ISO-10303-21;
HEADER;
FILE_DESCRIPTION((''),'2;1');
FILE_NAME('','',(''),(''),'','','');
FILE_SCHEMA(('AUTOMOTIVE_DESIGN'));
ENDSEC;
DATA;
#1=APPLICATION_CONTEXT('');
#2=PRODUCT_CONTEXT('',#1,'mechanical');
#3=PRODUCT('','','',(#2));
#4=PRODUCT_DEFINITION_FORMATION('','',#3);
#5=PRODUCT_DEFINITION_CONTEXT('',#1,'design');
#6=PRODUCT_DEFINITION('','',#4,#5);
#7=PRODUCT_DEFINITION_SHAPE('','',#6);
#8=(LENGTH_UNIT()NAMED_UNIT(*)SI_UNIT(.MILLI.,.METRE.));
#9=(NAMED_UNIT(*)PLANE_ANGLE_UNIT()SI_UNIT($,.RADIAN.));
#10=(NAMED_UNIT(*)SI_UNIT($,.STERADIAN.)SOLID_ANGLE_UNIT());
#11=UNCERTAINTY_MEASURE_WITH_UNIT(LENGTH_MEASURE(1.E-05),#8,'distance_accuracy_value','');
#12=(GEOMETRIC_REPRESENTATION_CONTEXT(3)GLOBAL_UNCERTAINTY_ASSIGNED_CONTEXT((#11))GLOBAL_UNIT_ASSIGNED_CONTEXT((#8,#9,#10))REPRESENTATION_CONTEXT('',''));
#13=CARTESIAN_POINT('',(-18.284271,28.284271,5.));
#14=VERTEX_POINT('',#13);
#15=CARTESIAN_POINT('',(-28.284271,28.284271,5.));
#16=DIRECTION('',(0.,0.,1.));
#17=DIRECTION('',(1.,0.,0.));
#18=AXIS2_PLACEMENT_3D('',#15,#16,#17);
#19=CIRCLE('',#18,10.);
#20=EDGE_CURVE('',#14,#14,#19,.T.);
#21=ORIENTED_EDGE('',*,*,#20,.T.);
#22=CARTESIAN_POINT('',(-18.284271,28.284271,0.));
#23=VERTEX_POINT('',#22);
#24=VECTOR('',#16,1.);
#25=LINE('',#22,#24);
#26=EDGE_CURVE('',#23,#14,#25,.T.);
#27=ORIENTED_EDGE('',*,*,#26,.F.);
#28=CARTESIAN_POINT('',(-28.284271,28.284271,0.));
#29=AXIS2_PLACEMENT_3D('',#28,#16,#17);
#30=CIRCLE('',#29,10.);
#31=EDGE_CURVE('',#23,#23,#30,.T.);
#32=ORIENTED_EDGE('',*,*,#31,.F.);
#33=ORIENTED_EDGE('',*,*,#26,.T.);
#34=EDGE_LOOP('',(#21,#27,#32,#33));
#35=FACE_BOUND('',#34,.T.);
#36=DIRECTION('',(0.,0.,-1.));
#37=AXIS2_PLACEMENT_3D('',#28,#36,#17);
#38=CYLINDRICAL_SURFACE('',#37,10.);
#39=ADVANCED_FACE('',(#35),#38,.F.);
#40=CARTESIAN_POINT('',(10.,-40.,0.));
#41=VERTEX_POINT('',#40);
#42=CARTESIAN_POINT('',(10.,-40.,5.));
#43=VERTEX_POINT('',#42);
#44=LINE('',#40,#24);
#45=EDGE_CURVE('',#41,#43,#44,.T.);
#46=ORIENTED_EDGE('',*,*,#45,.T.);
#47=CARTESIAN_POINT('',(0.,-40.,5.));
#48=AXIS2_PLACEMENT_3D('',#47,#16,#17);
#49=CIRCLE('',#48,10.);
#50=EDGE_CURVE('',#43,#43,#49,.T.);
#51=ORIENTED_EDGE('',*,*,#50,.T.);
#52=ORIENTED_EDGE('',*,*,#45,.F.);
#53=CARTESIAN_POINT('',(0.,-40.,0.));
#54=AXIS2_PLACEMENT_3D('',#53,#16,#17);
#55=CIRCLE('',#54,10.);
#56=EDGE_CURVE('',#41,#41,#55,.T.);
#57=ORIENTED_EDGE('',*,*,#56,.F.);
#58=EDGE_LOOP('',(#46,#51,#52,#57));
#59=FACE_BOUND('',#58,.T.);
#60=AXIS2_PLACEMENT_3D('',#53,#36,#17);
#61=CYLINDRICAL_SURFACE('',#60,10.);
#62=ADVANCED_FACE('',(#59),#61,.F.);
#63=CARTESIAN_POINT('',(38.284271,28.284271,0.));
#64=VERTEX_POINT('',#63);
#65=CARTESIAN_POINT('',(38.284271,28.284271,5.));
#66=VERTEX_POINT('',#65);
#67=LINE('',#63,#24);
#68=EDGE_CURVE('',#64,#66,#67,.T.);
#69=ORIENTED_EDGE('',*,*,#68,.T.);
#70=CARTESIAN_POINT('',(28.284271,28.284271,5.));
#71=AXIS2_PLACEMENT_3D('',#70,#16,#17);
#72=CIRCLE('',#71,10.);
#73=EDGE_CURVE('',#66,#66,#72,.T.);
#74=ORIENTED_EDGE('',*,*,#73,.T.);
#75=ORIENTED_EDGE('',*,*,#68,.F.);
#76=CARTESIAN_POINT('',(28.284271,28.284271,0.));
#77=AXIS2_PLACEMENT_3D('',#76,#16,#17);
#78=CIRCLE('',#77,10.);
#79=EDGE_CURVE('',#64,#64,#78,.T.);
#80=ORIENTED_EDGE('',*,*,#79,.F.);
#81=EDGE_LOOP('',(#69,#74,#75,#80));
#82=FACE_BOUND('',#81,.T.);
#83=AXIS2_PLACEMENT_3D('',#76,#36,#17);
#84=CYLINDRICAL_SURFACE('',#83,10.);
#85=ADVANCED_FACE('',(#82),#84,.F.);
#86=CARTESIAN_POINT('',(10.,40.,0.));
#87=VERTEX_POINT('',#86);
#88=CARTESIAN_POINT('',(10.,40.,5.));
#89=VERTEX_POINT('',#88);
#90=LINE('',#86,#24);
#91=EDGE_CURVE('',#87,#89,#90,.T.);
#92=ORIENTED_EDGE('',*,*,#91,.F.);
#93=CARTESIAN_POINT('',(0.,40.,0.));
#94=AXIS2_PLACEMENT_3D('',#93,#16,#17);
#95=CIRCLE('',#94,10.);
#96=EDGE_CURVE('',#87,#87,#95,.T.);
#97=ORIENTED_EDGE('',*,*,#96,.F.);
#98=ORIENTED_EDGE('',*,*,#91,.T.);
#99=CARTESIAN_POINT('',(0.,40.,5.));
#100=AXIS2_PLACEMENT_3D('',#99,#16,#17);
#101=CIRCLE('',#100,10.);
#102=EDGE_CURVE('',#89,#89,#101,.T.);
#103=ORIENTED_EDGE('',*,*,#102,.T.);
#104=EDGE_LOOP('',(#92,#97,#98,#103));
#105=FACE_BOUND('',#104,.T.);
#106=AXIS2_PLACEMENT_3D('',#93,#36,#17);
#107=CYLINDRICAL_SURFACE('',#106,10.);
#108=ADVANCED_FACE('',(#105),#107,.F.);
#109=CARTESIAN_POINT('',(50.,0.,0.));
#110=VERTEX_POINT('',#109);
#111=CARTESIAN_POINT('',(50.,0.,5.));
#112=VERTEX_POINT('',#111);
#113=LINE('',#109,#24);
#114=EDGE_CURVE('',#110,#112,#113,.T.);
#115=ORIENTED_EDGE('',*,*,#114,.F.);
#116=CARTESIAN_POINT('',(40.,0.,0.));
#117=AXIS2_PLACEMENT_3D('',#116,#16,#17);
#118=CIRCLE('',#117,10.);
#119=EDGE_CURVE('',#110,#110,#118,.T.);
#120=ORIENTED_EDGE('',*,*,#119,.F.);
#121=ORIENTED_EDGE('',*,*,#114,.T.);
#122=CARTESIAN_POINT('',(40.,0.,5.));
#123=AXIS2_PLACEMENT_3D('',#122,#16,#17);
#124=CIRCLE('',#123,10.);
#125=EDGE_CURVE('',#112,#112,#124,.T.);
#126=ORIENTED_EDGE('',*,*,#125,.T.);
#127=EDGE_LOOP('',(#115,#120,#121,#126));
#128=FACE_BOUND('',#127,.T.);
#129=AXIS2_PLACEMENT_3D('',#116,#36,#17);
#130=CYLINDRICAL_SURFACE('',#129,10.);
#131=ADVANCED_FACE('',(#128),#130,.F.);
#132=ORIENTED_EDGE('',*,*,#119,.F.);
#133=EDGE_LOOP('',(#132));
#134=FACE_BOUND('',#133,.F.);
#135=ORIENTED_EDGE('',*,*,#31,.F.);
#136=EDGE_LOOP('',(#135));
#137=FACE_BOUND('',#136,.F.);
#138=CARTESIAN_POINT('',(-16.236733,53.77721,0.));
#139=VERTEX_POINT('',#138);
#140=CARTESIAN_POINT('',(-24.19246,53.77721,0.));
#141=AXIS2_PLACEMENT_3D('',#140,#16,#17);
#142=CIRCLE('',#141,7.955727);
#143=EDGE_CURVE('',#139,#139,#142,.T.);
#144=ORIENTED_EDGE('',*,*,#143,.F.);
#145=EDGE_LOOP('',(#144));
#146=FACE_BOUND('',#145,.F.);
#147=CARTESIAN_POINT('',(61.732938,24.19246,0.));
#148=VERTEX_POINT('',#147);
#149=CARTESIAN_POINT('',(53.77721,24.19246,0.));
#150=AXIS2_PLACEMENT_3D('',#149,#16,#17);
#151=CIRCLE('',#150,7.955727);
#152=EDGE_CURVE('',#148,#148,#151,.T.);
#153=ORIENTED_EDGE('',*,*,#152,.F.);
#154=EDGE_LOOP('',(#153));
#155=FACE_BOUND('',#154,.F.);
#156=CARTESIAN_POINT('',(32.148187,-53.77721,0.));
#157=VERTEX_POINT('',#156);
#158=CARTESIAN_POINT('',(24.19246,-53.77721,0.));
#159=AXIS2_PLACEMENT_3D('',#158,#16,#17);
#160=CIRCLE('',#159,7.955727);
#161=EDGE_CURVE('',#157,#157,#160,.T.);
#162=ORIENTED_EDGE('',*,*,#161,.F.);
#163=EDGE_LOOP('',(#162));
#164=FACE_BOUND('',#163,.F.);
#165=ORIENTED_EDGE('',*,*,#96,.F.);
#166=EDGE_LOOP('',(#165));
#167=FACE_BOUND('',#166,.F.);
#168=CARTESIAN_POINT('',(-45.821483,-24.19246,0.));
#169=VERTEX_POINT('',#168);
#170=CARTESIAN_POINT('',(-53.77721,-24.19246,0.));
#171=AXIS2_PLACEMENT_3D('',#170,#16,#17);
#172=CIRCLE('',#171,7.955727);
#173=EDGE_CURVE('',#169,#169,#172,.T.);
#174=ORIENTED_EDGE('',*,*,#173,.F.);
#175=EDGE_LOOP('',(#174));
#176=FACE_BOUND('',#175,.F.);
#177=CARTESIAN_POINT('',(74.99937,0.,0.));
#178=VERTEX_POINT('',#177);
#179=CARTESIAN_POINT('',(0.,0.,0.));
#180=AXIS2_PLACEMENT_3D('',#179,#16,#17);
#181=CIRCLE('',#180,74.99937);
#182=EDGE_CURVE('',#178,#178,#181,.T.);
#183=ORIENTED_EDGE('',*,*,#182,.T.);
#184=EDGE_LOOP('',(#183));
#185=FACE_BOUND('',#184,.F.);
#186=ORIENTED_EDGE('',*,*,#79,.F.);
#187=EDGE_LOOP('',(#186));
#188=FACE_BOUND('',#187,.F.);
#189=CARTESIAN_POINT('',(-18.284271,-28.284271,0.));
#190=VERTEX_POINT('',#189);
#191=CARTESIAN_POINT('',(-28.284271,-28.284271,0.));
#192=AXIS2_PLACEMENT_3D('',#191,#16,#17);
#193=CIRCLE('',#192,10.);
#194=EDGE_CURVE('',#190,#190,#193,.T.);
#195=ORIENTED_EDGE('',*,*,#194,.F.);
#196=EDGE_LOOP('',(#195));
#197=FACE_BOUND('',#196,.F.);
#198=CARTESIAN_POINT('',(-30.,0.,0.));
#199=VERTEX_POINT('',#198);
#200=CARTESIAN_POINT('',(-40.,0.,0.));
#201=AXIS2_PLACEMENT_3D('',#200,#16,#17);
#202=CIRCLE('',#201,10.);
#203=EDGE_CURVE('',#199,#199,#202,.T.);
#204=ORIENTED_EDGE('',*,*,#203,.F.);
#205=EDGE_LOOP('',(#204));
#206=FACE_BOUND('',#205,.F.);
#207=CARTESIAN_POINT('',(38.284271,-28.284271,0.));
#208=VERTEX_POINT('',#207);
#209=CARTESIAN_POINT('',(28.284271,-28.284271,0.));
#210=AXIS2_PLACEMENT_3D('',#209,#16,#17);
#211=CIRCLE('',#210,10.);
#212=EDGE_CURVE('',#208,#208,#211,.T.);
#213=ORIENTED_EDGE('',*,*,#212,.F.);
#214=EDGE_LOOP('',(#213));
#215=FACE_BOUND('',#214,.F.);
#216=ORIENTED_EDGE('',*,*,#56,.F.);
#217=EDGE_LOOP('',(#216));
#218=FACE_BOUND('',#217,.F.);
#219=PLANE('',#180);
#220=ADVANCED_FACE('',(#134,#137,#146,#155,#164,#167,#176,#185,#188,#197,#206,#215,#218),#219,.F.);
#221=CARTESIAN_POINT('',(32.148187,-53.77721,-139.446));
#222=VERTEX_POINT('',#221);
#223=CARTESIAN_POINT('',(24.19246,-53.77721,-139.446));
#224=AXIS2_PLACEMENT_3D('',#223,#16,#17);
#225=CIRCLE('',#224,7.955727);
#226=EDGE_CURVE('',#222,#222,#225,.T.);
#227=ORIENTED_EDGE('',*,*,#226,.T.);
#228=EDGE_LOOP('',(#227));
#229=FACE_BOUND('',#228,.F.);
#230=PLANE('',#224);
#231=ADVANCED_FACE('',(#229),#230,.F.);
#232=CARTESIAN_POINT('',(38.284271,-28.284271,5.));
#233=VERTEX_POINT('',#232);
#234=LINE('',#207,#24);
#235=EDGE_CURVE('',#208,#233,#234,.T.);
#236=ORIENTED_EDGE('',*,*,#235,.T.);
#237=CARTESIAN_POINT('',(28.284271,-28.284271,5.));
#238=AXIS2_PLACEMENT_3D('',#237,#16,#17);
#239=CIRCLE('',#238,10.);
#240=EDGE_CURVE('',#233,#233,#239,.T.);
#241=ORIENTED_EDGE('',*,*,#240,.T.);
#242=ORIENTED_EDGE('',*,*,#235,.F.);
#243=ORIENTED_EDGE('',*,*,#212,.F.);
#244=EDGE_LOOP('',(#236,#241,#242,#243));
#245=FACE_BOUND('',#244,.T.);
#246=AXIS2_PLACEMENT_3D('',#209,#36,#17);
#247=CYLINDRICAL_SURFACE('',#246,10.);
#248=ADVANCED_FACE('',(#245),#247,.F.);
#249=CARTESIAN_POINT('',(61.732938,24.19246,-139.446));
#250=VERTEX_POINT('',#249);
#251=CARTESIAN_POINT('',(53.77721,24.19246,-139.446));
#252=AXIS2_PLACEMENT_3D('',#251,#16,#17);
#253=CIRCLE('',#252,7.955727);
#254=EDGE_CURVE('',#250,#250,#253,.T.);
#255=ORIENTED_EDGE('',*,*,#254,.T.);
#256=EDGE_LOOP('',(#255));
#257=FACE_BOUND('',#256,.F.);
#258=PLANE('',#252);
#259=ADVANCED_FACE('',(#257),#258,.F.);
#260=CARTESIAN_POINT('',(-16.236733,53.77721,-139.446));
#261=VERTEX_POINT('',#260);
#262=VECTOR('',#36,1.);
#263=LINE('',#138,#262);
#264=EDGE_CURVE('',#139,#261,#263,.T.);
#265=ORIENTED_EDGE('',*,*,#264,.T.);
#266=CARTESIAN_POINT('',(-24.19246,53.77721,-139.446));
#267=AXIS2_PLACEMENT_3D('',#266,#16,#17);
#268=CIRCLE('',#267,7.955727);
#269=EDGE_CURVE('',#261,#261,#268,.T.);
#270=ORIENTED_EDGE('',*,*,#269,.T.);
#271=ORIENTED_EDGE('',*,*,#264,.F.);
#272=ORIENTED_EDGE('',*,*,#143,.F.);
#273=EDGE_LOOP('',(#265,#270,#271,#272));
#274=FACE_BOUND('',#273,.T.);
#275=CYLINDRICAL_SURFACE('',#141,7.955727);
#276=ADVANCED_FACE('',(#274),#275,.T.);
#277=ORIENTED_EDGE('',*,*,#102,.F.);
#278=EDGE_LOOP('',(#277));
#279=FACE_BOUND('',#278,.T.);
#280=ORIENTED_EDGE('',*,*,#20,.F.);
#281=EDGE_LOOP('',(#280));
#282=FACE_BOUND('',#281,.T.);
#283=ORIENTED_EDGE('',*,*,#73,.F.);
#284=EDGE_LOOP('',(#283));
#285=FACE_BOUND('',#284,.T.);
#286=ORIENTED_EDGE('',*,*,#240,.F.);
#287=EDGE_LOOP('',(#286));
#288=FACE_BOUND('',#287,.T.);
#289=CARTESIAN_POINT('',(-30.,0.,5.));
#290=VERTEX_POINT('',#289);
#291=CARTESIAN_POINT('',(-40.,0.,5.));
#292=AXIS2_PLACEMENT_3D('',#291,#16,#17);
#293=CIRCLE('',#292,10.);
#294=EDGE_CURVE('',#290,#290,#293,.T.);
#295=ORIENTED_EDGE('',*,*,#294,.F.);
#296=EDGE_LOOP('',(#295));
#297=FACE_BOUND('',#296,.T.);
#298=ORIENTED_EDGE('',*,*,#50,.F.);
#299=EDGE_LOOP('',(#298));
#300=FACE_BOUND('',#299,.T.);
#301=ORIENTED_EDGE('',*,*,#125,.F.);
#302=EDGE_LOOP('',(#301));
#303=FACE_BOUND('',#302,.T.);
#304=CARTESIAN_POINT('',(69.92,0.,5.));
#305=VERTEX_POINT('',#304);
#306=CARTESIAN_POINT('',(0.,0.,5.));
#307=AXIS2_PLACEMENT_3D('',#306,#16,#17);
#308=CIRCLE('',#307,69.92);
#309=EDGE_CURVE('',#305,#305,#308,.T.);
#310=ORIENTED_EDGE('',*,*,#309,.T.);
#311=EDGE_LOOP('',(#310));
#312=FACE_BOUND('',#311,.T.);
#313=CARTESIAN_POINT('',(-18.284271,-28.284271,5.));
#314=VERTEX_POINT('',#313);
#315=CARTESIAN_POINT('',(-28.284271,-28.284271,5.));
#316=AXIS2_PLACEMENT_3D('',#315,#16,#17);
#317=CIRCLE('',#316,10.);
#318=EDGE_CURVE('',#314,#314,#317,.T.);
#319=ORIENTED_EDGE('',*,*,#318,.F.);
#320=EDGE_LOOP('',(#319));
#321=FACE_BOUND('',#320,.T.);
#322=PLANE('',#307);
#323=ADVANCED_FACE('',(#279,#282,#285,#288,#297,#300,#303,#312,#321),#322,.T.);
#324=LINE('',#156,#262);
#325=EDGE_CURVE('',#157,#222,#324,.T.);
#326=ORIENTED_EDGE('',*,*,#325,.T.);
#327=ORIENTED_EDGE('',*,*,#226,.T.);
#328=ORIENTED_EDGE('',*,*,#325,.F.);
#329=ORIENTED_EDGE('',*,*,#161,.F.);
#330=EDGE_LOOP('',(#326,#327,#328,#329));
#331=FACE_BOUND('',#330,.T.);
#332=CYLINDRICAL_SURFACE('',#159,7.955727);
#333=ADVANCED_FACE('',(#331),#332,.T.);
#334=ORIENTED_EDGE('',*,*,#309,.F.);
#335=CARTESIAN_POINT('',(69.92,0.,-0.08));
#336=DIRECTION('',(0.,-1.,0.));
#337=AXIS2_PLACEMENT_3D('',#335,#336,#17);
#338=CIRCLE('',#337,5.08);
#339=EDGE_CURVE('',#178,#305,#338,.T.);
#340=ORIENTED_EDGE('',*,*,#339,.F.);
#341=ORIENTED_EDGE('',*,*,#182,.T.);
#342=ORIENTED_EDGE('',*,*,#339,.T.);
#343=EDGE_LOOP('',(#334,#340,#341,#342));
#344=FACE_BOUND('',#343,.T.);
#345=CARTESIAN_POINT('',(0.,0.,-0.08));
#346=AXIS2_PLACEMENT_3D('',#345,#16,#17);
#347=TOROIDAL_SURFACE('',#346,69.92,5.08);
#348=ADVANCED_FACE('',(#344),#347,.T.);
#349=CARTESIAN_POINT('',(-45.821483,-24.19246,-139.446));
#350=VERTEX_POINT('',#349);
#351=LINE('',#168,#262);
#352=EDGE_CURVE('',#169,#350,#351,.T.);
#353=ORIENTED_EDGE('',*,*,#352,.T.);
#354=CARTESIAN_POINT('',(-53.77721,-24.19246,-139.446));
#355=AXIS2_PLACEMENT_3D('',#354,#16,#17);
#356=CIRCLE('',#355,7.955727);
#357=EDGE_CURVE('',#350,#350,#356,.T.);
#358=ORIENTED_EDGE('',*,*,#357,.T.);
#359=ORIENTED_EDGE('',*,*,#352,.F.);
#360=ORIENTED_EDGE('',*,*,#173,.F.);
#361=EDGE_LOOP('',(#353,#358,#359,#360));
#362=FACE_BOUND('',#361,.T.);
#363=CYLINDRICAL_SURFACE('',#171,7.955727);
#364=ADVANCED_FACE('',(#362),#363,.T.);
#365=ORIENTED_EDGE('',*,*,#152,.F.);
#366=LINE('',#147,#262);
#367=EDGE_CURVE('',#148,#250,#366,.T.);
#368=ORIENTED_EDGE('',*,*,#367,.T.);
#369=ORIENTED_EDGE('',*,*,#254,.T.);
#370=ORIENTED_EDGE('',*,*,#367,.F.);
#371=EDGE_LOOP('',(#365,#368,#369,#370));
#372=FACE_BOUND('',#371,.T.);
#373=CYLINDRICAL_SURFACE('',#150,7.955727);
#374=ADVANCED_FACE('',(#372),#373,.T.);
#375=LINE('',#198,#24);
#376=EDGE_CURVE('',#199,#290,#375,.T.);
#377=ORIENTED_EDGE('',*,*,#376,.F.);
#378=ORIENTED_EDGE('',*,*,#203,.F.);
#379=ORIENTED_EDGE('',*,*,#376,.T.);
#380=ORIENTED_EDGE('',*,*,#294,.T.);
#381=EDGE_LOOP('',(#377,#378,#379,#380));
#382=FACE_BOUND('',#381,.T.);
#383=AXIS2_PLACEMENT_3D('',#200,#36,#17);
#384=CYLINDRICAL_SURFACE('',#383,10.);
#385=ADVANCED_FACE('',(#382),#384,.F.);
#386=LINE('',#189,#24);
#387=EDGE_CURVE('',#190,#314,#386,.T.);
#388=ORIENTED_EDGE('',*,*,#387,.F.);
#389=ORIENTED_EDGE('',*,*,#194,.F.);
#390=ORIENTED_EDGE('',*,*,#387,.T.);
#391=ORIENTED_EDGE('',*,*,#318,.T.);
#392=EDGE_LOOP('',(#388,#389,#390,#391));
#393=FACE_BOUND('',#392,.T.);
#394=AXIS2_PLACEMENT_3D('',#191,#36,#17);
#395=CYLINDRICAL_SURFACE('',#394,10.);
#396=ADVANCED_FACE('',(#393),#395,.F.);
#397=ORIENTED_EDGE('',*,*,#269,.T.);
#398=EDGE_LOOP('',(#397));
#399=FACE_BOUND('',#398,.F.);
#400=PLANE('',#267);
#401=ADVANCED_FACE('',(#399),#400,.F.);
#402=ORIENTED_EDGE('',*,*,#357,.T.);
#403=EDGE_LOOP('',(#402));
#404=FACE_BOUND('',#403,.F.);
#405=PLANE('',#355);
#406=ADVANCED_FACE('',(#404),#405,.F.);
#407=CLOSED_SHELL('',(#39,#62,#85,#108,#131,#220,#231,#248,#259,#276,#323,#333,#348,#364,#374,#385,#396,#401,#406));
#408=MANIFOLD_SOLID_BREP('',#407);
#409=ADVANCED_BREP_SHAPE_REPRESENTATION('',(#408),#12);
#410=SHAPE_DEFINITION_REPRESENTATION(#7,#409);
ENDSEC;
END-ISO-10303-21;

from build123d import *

# Parameters (mm, degrees)
F0_R     = 75
F0_R_2   = 10
F1_DEPTH = 5
F3_R     = 7.9557273046
F4_DEPTH = 139.446


# Not quite as in the source:
# - a fillet or chamfer that OpenCascade refuses, or shapes differently, is made with other operations: its cross-section is extruded or revolved along the edge and cut away or added


with BuildPart() as f1:
    # F0 (on Top) → F1 (new body)
    with BuildSketch(Plane.XY):
        Circle(F0_R)
        with Locations((-28.2842712475, -28.2842712475)):
            Circle(F0_R_2, mode=Mode.SUBTRACT)
        with Locations((0, -40)):
            Circle(F0_R_2, mode=Mode.SUBTRACT)
        with Locations((28.2842712475, -28.2842712475)):
            Circle(F0_R_2, mode=Mode.SUBTRACT)
        with Locations((-40, 0)):
            Circle(F0_R_2, mode=Mode.SUBTRACT)
        with Locations((-28.2842712475, 28.2842712475)):
            Circle(F0_R_2, mode=Mode.SUBTRACT)
        with Locations((28.2842712475, 28.2842712475)):
            Circle(F0_R_2, mode=Mode.SUBTRACT)
        with Locations((40, 0)):
            Circle(F0_R_2, mode=Mode.SUBTRACT)
        with Locations((0, 40)):
            Circle(F0_R_2, mode=Mode.SUBTRACT)
    extrude(amount=F1_DEPTH)

    # F2: fillet of radius 5.08 on 1 edges, made by hand

    # F2_s1 → F2_t2 (revolve, cut)
    with BuildSketch(Plane.XZ):
        with BuildLine():
            ThreePointArc((75, -0.08), (73.5121024484, 3.5121024484), (69.92, 5))
            Line((69.92, 5), (75, 5))
            Line((75, 5), (75, -0.08))
        make_face()
    revolve(axis=Axis((0, 0, 5), (0, 0, 1)), mode=Mode.SUBTRACT)

    # F3 (on Top) → F4 (join)
    with BuildSketch(Plane.XY):
        with Locations((24.1924598813, -53.7772104144)):
            Circle(F3_R)
        with Locations((53.7772104144, 24.1924598813)):
            Circle(F3_R)
        with Locations((-24.1924598813, 53.7772104144)):
            Circle(F3_R)
        with Locations((-53.7772104144, -24.1924598813)):
            Circle(F3_R)
    extrude(amount=-F4_DEPTH)


solid = f1.part
